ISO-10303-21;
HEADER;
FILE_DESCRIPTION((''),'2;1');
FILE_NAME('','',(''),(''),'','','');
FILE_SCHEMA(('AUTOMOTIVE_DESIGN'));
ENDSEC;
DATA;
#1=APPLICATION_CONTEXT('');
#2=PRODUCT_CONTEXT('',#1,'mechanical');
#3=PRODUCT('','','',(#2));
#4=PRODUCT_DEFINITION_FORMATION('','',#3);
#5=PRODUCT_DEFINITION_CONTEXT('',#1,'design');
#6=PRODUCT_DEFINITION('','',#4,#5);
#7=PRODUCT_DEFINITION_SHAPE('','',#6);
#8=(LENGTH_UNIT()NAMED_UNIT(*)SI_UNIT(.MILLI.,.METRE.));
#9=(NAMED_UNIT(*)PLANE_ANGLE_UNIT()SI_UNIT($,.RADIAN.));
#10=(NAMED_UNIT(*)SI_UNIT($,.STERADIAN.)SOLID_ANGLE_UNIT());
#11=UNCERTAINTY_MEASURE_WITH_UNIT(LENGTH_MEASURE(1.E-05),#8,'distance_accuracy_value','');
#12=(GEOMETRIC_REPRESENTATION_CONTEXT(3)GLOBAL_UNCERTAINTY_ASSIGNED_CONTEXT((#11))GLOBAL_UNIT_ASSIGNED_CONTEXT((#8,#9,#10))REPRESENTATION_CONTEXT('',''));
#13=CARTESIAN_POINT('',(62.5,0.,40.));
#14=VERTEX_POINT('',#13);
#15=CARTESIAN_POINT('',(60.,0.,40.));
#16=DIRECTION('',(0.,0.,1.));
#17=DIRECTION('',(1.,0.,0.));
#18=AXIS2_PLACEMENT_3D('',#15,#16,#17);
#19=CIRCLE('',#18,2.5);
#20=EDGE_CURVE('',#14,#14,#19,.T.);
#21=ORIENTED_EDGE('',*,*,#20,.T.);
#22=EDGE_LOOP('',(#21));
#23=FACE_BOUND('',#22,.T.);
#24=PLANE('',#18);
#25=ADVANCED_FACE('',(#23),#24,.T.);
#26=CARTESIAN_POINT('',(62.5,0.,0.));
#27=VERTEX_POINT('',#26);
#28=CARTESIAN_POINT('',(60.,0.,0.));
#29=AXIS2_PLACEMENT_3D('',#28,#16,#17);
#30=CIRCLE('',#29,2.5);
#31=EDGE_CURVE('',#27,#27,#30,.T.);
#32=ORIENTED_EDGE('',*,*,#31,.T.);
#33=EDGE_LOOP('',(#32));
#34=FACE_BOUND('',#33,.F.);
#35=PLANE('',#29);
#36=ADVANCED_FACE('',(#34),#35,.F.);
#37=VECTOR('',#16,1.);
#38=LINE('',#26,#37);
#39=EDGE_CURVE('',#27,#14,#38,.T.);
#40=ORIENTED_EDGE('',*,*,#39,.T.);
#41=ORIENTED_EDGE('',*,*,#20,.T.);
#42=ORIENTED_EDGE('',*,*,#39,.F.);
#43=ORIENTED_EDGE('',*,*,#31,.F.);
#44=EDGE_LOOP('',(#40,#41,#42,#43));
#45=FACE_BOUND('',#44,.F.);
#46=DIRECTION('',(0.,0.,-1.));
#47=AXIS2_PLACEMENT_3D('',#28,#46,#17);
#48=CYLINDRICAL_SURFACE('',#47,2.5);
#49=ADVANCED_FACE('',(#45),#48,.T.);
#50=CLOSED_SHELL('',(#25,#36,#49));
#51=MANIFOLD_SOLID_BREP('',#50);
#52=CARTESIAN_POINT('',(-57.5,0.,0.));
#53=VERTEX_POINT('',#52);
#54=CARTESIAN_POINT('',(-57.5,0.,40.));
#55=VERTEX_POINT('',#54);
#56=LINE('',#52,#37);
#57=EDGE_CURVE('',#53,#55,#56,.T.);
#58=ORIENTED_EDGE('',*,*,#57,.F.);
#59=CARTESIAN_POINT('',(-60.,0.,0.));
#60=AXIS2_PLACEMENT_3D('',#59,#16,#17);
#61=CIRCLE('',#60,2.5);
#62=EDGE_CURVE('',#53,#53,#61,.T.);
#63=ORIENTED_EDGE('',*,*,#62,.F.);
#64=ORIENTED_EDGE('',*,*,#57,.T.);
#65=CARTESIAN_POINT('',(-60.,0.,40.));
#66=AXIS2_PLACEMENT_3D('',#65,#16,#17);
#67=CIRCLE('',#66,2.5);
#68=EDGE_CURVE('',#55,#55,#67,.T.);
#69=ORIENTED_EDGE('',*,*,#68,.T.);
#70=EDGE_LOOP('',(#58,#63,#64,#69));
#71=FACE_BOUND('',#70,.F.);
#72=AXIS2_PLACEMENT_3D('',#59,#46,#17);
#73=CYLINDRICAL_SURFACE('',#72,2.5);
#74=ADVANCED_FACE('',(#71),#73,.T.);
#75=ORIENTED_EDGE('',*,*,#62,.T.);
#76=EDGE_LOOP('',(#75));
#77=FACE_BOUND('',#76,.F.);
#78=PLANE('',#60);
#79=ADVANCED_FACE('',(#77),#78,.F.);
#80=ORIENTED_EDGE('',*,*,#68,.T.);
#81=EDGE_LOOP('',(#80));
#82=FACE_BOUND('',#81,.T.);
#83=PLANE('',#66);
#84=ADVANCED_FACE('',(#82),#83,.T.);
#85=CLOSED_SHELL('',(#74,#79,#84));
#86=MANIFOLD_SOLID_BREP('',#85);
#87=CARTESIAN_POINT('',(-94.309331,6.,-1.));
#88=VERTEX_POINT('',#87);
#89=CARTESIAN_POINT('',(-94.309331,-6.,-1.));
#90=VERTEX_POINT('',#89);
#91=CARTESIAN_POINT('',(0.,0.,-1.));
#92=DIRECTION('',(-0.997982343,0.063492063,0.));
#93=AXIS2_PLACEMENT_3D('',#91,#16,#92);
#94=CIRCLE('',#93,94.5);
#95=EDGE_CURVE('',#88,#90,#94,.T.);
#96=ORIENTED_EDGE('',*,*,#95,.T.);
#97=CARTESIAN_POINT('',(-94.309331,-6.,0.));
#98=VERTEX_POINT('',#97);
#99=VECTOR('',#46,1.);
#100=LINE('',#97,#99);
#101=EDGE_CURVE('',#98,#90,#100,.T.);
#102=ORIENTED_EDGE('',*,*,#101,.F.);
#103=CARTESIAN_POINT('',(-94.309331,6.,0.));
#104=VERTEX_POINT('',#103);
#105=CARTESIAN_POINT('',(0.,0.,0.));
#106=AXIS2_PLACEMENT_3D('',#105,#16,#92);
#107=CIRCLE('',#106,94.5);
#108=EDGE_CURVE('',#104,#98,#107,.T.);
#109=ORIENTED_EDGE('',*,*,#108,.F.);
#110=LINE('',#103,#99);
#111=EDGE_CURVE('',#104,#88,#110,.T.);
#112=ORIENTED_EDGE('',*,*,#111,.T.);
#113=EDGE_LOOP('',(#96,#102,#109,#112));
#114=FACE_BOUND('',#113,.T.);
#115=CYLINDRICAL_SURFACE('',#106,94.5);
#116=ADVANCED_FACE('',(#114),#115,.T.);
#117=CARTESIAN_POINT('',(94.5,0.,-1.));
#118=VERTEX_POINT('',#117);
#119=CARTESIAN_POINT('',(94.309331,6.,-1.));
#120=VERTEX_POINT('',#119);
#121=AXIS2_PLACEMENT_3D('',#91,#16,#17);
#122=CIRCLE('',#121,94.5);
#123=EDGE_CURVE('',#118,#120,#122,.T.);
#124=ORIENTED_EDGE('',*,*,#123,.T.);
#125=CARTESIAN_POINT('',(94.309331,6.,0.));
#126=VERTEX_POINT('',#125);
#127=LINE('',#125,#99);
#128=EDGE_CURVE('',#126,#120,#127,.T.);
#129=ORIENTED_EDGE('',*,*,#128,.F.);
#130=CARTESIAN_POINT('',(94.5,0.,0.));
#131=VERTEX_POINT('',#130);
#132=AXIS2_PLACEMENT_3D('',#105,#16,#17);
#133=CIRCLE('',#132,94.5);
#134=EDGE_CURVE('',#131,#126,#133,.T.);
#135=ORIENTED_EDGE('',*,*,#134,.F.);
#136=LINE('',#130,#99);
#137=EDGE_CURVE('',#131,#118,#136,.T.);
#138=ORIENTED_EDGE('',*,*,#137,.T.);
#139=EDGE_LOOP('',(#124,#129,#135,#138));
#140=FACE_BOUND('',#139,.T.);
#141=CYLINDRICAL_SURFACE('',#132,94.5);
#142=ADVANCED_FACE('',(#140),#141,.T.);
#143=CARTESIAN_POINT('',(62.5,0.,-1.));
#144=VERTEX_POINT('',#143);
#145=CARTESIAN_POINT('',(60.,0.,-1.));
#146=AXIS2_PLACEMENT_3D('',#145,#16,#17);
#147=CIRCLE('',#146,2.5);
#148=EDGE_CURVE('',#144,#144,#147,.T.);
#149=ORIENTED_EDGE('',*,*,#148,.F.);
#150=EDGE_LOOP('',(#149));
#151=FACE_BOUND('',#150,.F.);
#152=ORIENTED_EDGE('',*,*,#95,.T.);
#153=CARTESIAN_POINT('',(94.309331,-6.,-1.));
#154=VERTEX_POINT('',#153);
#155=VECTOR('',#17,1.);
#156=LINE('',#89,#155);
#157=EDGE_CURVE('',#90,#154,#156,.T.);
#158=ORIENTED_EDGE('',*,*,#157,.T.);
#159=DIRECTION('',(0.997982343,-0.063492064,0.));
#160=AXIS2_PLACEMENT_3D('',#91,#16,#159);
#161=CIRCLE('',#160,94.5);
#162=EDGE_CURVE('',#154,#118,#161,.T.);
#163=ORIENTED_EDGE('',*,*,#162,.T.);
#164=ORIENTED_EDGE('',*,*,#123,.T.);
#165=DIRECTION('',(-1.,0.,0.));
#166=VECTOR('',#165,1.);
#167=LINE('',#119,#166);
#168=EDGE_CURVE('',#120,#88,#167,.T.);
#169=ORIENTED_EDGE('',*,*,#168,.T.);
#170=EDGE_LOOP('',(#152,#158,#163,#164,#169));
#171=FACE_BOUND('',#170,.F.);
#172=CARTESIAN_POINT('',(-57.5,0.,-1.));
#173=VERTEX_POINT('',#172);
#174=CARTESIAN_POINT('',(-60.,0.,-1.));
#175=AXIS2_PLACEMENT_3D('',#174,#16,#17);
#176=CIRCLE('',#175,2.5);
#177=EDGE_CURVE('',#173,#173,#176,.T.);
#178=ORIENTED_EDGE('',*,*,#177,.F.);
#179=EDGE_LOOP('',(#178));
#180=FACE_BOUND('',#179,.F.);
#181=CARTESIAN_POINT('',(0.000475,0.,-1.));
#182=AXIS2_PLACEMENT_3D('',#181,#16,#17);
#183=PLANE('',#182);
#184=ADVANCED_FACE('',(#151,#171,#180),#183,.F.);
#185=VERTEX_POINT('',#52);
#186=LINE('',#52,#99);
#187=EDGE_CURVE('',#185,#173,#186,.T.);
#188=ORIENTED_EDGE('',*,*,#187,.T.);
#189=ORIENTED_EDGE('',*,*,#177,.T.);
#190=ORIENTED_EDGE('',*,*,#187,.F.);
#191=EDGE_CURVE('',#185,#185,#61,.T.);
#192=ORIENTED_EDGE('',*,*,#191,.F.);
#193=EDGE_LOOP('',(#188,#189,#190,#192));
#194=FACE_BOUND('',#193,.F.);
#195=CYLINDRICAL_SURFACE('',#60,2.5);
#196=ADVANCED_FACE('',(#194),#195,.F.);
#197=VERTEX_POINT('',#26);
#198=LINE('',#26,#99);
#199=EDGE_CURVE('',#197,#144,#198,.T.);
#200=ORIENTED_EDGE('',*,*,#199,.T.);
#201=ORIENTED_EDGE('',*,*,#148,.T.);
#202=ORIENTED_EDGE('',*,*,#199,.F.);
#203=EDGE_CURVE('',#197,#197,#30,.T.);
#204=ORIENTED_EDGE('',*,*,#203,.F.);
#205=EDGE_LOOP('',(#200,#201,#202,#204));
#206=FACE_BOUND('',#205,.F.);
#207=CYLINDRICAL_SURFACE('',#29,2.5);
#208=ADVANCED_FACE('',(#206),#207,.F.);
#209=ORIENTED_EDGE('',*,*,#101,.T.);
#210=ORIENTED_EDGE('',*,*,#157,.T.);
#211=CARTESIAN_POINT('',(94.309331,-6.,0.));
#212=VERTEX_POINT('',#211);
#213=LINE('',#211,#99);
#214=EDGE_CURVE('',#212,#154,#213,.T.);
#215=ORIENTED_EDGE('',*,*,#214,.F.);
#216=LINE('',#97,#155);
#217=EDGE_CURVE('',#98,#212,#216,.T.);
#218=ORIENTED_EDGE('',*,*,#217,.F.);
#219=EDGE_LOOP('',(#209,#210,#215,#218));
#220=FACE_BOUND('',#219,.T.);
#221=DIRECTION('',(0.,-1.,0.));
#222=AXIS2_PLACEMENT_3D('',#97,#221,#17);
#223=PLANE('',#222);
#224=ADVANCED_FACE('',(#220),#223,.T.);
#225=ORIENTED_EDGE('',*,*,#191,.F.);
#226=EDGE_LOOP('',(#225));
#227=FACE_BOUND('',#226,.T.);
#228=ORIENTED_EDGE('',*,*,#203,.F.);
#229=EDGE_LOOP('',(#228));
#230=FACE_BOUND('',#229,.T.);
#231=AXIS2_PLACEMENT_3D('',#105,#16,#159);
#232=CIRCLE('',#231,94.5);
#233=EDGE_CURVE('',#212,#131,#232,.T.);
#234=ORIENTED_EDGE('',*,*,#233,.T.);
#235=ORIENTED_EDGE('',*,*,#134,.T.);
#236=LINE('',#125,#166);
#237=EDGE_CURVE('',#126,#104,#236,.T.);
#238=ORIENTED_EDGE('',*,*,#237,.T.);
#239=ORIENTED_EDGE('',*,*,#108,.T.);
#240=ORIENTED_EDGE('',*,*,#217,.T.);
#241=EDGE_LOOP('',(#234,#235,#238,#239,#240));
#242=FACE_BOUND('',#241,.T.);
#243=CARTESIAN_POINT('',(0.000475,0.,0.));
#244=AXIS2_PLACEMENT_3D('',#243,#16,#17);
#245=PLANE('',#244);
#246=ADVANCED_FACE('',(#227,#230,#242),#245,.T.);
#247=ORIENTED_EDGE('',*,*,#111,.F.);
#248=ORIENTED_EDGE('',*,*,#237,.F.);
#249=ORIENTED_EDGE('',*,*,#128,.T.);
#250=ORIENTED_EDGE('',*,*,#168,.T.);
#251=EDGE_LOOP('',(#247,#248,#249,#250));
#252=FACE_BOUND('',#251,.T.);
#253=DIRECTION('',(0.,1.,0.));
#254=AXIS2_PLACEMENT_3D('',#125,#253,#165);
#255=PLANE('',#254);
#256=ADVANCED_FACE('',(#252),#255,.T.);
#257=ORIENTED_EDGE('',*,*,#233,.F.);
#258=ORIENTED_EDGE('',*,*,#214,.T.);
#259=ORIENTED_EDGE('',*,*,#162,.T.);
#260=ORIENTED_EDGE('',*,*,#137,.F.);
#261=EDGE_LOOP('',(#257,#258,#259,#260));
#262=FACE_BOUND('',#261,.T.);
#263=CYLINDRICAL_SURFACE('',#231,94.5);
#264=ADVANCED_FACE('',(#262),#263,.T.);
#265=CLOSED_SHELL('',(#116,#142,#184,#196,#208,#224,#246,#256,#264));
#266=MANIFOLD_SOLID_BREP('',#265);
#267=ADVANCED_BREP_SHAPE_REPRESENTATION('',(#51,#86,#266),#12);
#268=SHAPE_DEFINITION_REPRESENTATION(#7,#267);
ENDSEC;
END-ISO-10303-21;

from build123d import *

# Parameters (mm, degrees)
F0_R     = 2.5
F1_DEPTH = 40
F2_DEPTH = 1


# Not quite as in the source:
# - a feature names something its author has since deleted; it is built from what else it names


with BuildPart() as f1:
    # F0 (on Top) → F1 (new body)
    with BuildSketch(Plane.XY):
        with Locations((-60, 0)):
            Circle(F0_R)
    extrude(amount=F1_DEPTH)


with BuildPart() as f1b:
    # F0 (on Top) → F1, piece 2 (new body)
    with BuildSketch(Plane.XY):
        with Locations((60, 0)):
            Circle(F0_R)
    extrude(amount=F1_DEPTH)


with BuildPart() as f2:
    # F0 (on Top) → F2 (new body)
    with BuildSketch(Plane.XY):
        with BuildLine():
            ThreePointArc((94.3093314577, -6), (94.4523208364, -3.0015143883), (94.5, 0))
            ThreePointArc((94.5, 0), (94.4523208364, 3.0015143883), (94.3093314577, 6))
            Line((94.3093314577, 6), (-94.3093314577, 6))
            ThreePointArc((-94.3093314577, 6), (-94.5, 0), (-94.3093314577, -6))
            Line((-94.3093314577, -6), (94.3093314577, -6))
        make_face()
        with Locations((-60, 0)):
            Circle(F0_R, mode=Mode.SUBTRACT)
        with Locations((60, 0)):
            Circle(F0_R, mode=Mode.SUBTRACT)
    extrude(amount=-F2_DEPTH)


solid = Compound([f1.part, f1b.part, f2.part])
